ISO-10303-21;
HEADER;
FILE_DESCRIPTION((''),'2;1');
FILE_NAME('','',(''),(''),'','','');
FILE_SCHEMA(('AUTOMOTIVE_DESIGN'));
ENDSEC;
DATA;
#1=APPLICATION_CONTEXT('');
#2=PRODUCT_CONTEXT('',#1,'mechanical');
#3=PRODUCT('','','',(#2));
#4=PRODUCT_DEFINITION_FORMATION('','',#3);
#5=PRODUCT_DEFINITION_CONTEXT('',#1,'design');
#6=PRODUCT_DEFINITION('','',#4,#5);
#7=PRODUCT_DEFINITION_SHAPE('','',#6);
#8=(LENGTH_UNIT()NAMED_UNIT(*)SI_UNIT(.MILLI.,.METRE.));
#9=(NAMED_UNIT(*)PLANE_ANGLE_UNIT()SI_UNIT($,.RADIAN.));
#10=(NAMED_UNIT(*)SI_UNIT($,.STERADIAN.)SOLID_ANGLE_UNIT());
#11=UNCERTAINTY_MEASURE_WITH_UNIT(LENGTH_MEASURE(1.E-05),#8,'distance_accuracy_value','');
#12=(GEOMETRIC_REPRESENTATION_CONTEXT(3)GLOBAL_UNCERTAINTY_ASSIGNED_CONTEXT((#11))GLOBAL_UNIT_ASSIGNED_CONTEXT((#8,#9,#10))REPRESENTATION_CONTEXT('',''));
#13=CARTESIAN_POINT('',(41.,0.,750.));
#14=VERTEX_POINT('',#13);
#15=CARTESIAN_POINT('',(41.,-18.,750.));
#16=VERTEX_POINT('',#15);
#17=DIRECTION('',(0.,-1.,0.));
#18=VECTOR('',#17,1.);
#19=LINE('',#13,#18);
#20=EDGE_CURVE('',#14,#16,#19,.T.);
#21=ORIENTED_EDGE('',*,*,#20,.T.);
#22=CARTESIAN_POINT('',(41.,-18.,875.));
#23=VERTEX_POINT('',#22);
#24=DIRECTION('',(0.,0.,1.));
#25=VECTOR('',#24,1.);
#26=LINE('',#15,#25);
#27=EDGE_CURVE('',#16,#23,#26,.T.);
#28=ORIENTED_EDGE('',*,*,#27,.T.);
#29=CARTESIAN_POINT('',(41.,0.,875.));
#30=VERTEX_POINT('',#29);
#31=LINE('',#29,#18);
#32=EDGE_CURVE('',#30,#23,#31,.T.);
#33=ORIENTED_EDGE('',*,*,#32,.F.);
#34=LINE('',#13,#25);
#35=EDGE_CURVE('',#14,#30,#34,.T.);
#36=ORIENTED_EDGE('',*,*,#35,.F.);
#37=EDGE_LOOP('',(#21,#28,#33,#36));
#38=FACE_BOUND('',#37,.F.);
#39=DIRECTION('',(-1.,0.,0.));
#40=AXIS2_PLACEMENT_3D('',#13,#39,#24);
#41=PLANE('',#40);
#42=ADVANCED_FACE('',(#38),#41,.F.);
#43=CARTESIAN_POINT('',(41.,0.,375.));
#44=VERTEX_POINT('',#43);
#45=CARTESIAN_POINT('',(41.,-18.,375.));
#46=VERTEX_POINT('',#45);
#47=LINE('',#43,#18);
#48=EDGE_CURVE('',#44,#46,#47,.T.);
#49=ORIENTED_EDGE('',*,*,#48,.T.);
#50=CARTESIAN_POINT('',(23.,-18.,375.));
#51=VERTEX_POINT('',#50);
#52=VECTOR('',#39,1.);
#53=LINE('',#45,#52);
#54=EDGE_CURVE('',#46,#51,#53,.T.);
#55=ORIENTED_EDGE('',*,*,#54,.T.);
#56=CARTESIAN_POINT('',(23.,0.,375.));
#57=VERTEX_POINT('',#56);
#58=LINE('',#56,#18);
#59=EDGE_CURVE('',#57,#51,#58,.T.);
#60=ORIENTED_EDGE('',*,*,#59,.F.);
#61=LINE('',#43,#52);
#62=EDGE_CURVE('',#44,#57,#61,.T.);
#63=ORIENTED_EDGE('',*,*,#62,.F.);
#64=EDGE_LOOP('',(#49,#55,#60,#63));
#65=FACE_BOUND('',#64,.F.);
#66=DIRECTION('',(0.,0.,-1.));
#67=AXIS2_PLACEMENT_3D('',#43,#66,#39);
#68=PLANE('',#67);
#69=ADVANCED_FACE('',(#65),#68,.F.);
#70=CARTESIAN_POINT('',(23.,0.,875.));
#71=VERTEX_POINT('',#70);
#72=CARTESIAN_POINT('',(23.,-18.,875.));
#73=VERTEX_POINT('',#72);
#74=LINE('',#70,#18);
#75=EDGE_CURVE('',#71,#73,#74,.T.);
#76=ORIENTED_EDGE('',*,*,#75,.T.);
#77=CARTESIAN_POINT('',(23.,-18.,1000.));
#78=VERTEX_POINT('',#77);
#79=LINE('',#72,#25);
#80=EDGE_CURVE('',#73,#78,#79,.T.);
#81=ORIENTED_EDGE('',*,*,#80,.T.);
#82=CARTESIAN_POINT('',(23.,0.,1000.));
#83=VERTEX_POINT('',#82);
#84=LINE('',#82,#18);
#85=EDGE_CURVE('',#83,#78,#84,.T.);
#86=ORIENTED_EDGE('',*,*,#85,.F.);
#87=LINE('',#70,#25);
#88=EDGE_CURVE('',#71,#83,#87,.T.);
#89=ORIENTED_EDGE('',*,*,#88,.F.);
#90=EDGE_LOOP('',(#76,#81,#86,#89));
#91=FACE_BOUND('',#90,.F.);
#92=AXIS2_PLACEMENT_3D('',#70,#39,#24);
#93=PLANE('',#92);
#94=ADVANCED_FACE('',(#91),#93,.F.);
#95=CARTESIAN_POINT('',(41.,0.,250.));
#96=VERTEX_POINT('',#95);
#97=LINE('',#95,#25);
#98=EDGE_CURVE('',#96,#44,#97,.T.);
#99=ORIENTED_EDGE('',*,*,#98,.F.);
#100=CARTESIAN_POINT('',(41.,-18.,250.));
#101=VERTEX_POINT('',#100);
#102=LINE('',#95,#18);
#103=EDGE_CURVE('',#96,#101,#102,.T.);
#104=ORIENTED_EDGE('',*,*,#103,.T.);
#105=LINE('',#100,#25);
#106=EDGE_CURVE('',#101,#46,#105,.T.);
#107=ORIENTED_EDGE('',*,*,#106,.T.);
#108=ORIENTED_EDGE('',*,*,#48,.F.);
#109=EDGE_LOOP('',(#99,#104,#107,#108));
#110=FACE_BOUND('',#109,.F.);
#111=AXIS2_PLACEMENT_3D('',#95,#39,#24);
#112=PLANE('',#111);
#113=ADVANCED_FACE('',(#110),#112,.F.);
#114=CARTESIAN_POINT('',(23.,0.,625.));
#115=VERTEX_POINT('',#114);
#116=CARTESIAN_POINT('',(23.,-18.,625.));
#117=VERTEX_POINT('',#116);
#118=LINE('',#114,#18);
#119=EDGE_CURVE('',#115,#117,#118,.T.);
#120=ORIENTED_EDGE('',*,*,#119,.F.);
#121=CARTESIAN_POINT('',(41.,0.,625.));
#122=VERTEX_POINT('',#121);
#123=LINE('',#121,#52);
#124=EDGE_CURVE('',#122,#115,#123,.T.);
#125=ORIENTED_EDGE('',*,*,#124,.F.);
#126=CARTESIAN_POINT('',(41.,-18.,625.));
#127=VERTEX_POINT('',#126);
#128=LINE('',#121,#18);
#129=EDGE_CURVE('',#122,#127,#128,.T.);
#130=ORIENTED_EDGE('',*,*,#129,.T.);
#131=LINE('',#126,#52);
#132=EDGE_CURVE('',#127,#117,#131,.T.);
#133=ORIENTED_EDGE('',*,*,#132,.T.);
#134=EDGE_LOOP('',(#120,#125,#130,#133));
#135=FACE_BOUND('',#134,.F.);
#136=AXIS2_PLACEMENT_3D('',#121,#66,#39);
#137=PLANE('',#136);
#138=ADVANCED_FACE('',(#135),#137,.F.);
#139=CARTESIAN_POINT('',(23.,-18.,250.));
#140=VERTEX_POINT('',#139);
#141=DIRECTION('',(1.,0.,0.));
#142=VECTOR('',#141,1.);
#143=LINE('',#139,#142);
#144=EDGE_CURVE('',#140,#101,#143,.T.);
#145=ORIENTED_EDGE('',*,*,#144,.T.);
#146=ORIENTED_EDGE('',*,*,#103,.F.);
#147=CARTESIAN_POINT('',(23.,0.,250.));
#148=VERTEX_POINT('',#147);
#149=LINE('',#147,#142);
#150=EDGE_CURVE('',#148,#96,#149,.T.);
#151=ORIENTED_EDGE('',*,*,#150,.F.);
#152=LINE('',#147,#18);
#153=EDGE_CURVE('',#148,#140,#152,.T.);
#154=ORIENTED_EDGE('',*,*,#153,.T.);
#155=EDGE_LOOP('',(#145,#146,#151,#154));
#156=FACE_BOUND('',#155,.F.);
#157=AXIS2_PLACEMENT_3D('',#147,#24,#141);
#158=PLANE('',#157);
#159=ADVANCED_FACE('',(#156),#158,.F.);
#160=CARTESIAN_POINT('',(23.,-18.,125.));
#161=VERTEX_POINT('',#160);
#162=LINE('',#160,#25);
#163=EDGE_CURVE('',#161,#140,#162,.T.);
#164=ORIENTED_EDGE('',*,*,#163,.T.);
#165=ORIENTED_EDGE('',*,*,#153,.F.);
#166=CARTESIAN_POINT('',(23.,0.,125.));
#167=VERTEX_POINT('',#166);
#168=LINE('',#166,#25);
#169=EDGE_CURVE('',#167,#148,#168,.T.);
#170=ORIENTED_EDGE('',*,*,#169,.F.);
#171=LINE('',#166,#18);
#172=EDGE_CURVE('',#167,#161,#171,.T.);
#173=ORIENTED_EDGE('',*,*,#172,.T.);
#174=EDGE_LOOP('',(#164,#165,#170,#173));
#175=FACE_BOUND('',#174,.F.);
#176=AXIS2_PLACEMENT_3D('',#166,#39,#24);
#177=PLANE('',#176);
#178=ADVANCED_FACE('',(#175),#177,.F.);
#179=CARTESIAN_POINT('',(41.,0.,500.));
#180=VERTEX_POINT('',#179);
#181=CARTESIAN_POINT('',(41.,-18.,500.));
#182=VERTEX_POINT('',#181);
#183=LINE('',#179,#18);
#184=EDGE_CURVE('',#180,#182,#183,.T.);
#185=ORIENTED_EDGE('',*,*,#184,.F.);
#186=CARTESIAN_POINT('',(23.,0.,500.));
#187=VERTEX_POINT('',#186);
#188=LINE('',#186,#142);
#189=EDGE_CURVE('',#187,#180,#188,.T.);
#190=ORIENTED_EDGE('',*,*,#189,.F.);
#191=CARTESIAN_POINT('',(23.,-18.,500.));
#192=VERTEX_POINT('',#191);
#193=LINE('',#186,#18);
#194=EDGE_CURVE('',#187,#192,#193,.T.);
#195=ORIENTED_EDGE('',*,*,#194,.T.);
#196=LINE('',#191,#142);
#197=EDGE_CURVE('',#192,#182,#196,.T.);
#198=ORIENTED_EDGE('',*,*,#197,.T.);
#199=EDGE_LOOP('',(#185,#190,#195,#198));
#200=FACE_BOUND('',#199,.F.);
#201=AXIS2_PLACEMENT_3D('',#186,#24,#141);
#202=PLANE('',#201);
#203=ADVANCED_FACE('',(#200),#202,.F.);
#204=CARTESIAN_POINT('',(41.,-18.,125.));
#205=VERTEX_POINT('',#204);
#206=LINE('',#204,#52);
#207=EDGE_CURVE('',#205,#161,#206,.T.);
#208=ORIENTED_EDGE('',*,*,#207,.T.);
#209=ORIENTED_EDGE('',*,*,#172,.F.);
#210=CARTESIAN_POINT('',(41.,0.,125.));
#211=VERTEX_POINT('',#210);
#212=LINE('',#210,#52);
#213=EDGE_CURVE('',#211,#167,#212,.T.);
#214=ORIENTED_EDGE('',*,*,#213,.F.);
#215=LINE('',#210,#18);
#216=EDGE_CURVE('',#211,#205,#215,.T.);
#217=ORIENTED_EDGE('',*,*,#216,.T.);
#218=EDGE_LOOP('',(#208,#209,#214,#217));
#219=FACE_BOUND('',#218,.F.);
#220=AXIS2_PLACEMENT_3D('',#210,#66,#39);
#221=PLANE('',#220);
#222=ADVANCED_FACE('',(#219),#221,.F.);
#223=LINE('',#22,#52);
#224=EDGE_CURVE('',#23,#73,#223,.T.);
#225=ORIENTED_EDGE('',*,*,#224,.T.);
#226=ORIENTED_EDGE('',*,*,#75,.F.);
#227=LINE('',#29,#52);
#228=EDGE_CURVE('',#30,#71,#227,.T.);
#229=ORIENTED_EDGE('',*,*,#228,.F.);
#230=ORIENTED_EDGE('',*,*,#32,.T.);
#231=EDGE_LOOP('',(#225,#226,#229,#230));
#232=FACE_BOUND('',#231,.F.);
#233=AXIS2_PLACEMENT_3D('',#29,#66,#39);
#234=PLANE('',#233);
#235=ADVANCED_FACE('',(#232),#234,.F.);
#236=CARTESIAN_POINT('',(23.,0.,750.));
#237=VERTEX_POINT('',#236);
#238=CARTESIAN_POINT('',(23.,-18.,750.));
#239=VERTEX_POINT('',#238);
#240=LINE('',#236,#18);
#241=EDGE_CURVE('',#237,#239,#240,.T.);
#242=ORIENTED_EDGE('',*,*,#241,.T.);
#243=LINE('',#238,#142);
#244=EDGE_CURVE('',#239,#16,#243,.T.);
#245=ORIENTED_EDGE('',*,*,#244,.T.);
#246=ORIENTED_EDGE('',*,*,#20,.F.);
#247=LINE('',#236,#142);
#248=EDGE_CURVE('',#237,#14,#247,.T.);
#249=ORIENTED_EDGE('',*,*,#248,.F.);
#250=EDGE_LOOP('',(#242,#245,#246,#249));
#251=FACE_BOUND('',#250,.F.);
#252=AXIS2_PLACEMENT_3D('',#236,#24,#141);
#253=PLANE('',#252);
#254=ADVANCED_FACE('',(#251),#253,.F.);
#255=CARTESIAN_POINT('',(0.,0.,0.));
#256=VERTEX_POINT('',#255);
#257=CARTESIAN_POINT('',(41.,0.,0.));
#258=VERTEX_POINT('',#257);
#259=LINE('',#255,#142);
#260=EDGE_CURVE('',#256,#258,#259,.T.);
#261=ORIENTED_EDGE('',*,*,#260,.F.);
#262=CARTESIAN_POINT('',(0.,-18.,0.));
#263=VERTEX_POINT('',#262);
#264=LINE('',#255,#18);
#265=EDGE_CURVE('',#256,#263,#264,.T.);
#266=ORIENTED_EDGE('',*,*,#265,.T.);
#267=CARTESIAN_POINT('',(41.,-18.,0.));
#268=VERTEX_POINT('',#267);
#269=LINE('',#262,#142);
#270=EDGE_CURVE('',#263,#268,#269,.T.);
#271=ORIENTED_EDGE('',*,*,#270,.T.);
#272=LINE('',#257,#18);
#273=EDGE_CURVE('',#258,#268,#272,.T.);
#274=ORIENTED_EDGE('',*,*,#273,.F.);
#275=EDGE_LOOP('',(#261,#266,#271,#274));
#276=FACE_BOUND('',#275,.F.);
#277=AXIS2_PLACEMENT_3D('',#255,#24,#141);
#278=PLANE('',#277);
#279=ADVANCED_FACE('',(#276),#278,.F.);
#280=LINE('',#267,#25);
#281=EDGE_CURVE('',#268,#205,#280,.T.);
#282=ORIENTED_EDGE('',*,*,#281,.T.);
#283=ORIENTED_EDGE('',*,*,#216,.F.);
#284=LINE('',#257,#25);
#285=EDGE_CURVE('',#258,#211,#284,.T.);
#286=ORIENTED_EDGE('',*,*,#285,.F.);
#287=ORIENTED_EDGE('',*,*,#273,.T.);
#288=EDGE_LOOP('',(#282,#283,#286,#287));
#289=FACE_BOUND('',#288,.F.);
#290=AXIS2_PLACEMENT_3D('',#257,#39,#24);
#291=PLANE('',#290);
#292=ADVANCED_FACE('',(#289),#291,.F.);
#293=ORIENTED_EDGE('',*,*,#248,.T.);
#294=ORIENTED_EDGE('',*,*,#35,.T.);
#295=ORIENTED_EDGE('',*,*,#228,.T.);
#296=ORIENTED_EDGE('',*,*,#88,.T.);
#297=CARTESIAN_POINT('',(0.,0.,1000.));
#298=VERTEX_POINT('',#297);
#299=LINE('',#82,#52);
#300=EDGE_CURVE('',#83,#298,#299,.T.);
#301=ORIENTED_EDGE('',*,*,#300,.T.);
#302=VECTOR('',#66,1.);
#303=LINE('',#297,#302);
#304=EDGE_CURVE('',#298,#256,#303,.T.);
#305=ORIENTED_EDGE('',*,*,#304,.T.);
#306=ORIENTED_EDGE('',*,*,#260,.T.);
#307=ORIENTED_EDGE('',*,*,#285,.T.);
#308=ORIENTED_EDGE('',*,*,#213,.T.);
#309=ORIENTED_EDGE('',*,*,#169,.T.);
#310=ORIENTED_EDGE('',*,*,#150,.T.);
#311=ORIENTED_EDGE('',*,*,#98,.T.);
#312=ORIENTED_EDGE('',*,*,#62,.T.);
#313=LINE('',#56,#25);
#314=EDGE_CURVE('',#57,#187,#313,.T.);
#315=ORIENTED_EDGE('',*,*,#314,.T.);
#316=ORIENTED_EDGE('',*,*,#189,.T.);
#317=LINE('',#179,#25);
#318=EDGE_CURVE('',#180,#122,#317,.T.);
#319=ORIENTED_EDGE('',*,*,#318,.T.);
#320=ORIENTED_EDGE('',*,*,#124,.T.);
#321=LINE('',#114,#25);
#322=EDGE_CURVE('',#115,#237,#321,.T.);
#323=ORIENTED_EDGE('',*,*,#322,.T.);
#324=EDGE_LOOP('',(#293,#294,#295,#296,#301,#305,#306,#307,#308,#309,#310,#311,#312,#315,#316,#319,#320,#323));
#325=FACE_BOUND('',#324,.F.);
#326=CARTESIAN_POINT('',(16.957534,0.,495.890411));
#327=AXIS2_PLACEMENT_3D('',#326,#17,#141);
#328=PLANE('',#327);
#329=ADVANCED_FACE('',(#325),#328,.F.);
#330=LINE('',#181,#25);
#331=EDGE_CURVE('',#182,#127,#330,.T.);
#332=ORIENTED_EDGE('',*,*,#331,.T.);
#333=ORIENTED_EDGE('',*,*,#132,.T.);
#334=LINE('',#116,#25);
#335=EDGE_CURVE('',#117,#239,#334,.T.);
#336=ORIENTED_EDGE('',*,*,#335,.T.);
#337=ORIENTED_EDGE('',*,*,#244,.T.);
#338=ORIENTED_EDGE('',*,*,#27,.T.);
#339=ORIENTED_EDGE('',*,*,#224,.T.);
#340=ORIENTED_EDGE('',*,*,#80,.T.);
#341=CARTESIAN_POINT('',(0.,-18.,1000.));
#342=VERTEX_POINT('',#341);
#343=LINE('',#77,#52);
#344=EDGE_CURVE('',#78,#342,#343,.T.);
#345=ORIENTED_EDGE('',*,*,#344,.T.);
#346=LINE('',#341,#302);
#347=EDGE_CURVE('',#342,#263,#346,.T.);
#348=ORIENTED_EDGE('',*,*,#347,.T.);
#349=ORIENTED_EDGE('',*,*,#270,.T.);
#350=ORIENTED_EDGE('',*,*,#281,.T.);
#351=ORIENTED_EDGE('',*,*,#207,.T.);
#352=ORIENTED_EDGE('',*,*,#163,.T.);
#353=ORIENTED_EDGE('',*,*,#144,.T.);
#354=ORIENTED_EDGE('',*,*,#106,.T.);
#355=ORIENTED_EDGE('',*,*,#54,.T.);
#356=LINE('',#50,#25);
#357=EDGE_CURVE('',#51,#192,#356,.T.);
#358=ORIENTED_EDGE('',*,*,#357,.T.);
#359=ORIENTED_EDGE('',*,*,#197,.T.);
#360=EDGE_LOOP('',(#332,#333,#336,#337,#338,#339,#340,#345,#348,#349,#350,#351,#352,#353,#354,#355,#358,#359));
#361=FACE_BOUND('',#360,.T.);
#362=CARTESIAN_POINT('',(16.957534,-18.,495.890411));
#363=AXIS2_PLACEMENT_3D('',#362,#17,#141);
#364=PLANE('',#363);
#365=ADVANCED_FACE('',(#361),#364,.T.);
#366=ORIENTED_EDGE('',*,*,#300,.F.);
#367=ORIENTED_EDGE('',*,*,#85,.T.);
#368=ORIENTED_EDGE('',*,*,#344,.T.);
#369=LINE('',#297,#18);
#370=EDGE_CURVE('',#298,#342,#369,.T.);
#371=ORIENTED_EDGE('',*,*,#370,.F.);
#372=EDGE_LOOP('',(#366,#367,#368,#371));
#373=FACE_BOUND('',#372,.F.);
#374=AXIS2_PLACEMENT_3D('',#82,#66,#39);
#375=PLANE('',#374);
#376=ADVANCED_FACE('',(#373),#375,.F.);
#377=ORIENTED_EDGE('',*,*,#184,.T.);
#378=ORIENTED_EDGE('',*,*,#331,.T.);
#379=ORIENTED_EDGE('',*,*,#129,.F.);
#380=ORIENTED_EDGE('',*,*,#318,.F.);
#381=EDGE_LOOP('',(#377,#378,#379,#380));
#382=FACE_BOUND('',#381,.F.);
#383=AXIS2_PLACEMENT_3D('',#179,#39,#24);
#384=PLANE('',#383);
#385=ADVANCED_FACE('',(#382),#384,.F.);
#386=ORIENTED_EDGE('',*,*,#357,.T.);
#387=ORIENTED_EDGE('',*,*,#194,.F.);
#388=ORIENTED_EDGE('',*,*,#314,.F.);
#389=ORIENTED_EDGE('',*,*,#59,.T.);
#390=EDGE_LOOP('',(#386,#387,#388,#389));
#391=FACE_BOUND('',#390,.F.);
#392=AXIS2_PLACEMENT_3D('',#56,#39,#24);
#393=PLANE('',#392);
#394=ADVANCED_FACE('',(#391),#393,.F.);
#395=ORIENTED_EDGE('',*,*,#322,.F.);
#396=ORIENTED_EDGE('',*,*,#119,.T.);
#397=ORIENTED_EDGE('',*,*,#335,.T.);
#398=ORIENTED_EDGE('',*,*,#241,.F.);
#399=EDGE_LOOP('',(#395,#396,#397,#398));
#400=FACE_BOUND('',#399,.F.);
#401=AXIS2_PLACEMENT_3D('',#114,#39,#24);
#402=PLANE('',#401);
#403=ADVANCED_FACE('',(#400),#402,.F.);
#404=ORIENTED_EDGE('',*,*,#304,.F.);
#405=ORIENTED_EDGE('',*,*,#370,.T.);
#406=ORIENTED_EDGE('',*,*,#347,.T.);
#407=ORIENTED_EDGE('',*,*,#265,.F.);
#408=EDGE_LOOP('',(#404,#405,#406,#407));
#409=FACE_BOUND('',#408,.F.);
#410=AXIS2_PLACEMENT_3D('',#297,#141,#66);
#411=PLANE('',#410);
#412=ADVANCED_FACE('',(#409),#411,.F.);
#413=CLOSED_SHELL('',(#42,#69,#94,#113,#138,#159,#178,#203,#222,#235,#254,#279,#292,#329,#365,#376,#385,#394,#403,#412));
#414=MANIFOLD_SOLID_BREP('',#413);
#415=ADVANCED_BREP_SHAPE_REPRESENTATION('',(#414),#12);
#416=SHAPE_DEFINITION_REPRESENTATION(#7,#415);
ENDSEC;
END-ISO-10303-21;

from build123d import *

# Parameters (mm, degrees)
F1_DEPTH = 18


# Not quite as in the source:
# - a feature names something its author has since deleted; it is built from what else it names


with BuildPart() as f1:
    # F0 (on Front) → F1 (new body)
    with BuildSketch(Plane.XZ):
        Polygon((0, 1000), (0, 0), (41, 0), (41, 125), (23, 125), (23, 250), (41, 250), (41, 375), (23, 375), (23, 500), (41, 500), (41, 625), (23, 625), (23, 750), (41, 750), (41, 875), (23, 875), (23, 1000), align=None)
    extrude(amount=F1_DEPTH)


solid = f1.part
